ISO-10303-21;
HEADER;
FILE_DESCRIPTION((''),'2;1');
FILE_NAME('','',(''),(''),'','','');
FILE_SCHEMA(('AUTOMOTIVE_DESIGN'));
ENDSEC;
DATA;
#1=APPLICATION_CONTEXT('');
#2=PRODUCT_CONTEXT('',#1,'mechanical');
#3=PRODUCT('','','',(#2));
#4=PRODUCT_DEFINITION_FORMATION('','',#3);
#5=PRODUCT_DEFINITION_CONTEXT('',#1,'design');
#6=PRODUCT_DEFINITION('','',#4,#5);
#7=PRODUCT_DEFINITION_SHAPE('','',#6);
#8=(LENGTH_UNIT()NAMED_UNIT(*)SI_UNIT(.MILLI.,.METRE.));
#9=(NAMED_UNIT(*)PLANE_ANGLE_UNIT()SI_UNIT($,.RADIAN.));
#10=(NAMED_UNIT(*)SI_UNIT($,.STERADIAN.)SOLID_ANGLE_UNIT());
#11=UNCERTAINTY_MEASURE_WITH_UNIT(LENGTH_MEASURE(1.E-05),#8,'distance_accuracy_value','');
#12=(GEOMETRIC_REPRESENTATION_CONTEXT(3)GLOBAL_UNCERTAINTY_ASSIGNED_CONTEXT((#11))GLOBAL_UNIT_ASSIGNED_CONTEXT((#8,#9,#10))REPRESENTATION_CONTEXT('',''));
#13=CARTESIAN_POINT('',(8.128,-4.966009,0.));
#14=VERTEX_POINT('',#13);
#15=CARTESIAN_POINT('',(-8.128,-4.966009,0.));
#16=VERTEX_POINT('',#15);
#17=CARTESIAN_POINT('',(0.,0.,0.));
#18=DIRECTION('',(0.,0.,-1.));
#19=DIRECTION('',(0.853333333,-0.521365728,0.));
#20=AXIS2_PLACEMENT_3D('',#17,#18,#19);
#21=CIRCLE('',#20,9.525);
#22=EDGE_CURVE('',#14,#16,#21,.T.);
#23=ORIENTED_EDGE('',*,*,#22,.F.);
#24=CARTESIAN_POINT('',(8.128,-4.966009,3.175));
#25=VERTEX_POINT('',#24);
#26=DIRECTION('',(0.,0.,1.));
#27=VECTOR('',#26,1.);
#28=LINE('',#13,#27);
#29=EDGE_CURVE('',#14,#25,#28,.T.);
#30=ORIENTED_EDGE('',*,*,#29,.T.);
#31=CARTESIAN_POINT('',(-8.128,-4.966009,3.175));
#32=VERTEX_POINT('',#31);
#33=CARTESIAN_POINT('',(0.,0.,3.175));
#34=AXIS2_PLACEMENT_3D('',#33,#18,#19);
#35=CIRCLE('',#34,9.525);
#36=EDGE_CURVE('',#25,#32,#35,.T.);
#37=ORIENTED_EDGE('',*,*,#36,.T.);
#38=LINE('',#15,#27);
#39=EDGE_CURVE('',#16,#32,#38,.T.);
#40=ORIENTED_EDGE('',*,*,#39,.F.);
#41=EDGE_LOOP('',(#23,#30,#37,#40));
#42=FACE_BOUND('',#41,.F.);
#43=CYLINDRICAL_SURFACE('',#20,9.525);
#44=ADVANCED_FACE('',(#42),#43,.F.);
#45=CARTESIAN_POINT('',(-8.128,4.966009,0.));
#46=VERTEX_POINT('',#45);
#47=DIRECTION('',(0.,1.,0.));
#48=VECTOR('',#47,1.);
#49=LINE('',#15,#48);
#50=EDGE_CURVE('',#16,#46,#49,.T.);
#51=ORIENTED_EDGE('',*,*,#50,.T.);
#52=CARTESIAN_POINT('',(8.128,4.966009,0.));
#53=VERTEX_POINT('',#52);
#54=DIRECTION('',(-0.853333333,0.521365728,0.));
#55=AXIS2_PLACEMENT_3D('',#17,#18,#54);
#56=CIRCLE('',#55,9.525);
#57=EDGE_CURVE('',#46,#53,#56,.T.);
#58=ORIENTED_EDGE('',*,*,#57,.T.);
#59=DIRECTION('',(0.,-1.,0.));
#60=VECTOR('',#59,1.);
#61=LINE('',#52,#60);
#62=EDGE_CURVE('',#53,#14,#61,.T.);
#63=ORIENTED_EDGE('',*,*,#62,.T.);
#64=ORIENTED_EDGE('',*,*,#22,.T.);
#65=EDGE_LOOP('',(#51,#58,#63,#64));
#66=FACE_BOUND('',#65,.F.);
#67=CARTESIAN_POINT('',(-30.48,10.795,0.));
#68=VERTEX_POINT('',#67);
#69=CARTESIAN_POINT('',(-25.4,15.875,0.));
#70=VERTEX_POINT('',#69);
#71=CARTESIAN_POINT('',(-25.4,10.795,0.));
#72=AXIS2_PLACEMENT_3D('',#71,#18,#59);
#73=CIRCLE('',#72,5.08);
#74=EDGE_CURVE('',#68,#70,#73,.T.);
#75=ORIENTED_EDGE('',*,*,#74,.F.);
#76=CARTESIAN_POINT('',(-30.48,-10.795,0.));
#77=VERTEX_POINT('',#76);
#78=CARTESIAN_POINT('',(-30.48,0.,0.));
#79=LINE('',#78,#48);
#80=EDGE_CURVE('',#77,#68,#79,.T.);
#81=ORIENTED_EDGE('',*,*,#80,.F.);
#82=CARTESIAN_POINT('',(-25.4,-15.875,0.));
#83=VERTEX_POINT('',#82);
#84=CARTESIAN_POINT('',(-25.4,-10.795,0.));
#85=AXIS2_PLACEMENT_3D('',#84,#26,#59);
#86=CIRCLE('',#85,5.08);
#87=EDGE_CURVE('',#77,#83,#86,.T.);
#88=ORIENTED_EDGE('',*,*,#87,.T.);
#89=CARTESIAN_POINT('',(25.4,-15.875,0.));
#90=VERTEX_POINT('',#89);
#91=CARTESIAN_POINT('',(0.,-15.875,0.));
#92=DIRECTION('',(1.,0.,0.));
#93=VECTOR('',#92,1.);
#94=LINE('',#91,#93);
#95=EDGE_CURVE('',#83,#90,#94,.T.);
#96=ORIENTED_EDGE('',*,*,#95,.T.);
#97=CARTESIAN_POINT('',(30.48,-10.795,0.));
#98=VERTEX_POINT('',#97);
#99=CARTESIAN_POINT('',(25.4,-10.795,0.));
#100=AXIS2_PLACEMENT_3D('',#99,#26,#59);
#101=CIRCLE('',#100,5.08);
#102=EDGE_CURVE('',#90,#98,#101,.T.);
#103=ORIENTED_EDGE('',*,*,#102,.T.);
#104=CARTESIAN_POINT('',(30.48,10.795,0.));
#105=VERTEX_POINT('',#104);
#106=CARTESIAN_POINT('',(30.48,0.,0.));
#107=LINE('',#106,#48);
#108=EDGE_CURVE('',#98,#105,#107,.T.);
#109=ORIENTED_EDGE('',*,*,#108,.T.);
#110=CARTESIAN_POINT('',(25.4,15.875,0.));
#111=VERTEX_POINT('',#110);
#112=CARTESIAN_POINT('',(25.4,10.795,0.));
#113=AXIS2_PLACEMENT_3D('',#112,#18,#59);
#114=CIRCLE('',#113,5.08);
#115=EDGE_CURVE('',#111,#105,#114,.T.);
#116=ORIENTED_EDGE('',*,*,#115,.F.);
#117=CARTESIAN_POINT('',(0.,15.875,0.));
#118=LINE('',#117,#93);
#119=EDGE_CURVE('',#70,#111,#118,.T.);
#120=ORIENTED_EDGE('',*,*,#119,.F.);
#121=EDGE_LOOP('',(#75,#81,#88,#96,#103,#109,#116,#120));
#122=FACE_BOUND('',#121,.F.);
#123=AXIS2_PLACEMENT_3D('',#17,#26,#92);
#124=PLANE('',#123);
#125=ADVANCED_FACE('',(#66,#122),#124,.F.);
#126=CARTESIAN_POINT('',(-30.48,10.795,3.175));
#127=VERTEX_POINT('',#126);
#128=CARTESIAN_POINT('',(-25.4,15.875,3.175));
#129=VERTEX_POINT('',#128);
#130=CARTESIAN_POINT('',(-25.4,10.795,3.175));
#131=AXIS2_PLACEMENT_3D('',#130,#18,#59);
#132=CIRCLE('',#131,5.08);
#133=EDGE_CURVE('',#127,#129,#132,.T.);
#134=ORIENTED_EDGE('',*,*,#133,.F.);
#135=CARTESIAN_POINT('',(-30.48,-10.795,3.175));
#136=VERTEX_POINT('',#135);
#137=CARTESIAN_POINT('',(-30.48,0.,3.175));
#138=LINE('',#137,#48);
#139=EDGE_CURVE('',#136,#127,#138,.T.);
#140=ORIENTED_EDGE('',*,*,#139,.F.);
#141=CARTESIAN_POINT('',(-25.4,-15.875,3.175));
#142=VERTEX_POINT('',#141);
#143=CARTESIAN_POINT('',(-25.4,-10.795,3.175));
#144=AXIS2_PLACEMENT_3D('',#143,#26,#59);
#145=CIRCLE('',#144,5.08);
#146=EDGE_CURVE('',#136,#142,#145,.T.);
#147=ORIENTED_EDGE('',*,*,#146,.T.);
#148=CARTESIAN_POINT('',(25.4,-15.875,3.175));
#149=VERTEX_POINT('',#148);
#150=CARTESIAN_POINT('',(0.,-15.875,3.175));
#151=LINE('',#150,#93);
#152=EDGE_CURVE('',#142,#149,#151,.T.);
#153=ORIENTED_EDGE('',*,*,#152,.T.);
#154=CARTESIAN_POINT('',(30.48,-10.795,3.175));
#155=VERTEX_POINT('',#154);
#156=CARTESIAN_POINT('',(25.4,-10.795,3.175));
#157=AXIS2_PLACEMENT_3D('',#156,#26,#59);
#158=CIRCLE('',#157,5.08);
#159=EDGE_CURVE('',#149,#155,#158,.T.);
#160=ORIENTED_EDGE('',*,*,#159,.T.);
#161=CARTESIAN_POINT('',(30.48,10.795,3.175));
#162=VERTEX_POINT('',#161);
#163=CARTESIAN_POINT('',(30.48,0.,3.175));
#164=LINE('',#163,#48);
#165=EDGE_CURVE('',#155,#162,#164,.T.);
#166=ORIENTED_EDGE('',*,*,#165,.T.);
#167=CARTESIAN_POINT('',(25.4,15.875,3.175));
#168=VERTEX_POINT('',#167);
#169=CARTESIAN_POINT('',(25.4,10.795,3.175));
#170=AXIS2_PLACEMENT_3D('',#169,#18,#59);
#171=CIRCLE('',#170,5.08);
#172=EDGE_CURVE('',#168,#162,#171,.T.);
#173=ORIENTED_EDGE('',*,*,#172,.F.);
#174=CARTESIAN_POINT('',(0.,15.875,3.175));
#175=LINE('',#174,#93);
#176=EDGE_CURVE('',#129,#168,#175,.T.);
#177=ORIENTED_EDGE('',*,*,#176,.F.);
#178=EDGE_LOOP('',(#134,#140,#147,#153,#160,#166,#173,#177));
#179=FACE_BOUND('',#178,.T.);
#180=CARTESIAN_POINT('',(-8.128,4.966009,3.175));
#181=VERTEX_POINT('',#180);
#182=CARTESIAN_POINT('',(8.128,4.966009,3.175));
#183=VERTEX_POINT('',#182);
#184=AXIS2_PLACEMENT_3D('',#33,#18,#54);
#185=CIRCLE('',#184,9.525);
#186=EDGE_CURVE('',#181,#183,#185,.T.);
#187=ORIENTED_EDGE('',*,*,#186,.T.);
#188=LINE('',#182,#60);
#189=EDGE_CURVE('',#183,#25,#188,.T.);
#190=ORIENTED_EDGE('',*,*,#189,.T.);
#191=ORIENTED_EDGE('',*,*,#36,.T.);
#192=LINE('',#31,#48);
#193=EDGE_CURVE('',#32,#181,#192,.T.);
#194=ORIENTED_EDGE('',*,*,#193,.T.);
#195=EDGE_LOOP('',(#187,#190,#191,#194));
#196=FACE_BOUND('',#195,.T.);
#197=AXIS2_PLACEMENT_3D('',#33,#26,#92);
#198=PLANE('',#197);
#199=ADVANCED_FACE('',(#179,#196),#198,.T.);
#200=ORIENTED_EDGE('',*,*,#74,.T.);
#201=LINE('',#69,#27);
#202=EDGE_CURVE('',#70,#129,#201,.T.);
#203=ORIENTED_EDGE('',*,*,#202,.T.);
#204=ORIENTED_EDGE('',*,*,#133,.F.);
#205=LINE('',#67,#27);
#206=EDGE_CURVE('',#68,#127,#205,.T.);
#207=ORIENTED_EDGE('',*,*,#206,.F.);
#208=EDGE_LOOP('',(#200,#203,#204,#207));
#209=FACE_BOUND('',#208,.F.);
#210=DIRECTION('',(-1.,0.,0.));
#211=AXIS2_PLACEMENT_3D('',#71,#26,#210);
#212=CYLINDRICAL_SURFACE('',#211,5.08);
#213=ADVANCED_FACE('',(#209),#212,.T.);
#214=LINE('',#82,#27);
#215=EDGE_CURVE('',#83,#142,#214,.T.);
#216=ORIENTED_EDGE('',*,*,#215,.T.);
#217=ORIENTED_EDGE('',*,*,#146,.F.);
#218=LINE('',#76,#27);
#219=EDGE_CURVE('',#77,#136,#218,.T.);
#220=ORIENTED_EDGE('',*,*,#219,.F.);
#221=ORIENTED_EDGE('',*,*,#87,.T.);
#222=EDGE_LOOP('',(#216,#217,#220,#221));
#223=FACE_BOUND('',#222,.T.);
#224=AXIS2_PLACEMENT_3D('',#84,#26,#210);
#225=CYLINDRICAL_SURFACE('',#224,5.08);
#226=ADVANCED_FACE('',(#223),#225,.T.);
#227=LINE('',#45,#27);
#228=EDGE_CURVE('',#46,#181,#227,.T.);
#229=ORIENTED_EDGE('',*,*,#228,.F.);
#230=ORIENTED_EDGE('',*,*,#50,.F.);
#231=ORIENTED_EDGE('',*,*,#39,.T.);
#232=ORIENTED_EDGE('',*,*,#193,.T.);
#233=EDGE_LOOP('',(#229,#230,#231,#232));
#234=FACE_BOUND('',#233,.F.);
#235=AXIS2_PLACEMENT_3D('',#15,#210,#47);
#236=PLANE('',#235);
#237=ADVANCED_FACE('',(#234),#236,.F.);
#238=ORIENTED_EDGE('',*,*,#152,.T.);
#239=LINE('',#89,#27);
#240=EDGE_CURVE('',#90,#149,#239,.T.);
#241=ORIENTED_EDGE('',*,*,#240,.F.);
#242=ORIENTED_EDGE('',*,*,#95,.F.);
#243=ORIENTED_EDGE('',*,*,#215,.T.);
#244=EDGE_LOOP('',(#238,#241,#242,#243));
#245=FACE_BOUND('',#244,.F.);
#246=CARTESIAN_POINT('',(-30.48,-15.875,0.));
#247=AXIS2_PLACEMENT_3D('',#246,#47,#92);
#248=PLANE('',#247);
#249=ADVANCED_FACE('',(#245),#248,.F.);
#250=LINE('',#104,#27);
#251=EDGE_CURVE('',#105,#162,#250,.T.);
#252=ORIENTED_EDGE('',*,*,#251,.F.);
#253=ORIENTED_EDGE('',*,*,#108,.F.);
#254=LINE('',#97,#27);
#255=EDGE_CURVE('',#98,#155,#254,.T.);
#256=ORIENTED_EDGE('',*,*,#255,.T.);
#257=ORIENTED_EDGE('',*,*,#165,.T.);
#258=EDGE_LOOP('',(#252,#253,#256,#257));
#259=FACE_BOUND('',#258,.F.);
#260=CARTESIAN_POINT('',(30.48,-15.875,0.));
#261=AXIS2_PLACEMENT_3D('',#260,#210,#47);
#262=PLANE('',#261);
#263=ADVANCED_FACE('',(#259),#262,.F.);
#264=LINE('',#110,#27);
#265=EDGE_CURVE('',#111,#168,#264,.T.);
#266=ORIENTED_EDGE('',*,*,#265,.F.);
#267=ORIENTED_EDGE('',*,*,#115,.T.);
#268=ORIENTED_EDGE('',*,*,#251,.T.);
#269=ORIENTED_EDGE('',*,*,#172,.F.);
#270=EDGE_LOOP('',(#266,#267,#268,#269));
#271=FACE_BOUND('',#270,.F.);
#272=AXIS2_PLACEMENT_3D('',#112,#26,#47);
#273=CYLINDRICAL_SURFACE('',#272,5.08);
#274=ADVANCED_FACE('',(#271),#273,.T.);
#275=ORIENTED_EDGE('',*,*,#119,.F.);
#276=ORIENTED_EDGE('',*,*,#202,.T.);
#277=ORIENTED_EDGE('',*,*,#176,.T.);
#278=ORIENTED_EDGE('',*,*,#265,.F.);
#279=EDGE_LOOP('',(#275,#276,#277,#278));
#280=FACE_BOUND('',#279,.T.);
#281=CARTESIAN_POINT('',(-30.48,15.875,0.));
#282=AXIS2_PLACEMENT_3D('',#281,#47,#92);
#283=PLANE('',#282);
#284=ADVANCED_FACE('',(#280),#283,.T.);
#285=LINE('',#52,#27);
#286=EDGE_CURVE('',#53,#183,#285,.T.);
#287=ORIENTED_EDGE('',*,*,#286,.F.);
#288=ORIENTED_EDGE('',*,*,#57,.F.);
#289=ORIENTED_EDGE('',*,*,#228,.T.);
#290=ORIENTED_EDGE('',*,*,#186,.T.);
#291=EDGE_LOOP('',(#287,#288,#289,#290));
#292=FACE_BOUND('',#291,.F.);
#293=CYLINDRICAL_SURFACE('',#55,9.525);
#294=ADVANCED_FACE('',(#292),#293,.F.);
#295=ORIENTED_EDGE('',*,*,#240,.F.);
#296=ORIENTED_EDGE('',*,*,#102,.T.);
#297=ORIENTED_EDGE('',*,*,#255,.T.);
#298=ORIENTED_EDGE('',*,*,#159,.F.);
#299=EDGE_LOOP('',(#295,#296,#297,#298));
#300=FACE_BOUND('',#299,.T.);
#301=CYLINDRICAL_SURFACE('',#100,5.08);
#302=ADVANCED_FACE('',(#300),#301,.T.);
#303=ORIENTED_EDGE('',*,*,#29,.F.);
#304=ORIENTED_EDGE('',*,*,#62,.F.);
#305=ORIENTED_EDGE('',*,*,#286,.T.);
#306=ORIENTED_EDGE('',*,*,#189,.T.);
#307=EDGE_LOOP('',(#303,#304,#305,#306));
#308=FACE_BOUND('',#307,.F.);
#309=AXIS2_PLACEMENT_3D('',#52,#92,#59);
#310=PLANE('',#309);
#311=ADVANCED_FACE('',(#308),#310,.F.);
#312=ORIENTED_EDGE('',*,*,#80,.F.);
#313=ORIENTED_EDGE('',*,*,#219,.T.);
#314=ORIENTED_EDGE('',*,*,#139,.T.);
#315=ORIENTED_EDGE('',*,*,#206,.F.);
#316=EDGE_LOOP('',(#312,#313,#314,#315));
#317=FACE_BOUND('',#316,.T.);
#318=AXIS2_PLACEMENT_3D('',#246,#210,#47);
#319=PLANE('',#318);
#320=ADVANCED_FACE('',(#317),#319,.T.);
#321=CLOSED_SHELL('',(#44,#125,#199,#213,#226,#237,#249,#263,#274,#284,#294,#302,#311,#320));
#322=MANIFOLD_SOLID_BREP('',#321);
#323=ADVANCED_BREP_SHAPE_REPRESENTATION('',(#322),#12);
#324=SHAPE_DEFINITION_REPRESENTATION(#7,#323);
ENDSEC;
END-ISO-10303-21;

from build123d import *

# Parameters (mm, degrees)
F0_W     = 60.96
F0_H     = 31.75
F1_DEPTH = 3.175
F2_R     = 5.08


# Not quite as in the source:
# - a length typed as a fraction of an inch, garbled in the dataset ("3 / 203.2 mm" for 3/8 in), is restored


with BuildPart() as f1:
    # F0 (on Top) → F1 (new body)
    with BuildSketch(Plane.XY):
        Rectangle(F0_W, F0_H)
        with BuildLine():
            Line((-8.128, -4.9660085582), (-8.128, 4.9660085582))
            ThreePointArc((-8.128, 4.9660085582), (0, 9.525), (8.128, 4.9660085582))
            Line((8.128, 4.9660085582), (8.128, -4.9660085582))
            ThreePointArc((8.128, -4.9660085582), (0, -9.525), (-8.128, -4.9660085582))
        make_face(mode=Mode.SUBTRACT)
    extrude(amount=F1_DEPTH)

    # F2
    f2_edges = [f1.edges().sort_by_distance(p)[0] for p in [
        (-30.48, 15.875, 1.5875),
        (30.48, 15.875, 1.5875),
        (-30.48, -15.875, 1.5875),
        (30.48, -15.875, 1.5875),
    ]]
    fillet(f2_edges, radius=F2_R)


solid = f1.part
